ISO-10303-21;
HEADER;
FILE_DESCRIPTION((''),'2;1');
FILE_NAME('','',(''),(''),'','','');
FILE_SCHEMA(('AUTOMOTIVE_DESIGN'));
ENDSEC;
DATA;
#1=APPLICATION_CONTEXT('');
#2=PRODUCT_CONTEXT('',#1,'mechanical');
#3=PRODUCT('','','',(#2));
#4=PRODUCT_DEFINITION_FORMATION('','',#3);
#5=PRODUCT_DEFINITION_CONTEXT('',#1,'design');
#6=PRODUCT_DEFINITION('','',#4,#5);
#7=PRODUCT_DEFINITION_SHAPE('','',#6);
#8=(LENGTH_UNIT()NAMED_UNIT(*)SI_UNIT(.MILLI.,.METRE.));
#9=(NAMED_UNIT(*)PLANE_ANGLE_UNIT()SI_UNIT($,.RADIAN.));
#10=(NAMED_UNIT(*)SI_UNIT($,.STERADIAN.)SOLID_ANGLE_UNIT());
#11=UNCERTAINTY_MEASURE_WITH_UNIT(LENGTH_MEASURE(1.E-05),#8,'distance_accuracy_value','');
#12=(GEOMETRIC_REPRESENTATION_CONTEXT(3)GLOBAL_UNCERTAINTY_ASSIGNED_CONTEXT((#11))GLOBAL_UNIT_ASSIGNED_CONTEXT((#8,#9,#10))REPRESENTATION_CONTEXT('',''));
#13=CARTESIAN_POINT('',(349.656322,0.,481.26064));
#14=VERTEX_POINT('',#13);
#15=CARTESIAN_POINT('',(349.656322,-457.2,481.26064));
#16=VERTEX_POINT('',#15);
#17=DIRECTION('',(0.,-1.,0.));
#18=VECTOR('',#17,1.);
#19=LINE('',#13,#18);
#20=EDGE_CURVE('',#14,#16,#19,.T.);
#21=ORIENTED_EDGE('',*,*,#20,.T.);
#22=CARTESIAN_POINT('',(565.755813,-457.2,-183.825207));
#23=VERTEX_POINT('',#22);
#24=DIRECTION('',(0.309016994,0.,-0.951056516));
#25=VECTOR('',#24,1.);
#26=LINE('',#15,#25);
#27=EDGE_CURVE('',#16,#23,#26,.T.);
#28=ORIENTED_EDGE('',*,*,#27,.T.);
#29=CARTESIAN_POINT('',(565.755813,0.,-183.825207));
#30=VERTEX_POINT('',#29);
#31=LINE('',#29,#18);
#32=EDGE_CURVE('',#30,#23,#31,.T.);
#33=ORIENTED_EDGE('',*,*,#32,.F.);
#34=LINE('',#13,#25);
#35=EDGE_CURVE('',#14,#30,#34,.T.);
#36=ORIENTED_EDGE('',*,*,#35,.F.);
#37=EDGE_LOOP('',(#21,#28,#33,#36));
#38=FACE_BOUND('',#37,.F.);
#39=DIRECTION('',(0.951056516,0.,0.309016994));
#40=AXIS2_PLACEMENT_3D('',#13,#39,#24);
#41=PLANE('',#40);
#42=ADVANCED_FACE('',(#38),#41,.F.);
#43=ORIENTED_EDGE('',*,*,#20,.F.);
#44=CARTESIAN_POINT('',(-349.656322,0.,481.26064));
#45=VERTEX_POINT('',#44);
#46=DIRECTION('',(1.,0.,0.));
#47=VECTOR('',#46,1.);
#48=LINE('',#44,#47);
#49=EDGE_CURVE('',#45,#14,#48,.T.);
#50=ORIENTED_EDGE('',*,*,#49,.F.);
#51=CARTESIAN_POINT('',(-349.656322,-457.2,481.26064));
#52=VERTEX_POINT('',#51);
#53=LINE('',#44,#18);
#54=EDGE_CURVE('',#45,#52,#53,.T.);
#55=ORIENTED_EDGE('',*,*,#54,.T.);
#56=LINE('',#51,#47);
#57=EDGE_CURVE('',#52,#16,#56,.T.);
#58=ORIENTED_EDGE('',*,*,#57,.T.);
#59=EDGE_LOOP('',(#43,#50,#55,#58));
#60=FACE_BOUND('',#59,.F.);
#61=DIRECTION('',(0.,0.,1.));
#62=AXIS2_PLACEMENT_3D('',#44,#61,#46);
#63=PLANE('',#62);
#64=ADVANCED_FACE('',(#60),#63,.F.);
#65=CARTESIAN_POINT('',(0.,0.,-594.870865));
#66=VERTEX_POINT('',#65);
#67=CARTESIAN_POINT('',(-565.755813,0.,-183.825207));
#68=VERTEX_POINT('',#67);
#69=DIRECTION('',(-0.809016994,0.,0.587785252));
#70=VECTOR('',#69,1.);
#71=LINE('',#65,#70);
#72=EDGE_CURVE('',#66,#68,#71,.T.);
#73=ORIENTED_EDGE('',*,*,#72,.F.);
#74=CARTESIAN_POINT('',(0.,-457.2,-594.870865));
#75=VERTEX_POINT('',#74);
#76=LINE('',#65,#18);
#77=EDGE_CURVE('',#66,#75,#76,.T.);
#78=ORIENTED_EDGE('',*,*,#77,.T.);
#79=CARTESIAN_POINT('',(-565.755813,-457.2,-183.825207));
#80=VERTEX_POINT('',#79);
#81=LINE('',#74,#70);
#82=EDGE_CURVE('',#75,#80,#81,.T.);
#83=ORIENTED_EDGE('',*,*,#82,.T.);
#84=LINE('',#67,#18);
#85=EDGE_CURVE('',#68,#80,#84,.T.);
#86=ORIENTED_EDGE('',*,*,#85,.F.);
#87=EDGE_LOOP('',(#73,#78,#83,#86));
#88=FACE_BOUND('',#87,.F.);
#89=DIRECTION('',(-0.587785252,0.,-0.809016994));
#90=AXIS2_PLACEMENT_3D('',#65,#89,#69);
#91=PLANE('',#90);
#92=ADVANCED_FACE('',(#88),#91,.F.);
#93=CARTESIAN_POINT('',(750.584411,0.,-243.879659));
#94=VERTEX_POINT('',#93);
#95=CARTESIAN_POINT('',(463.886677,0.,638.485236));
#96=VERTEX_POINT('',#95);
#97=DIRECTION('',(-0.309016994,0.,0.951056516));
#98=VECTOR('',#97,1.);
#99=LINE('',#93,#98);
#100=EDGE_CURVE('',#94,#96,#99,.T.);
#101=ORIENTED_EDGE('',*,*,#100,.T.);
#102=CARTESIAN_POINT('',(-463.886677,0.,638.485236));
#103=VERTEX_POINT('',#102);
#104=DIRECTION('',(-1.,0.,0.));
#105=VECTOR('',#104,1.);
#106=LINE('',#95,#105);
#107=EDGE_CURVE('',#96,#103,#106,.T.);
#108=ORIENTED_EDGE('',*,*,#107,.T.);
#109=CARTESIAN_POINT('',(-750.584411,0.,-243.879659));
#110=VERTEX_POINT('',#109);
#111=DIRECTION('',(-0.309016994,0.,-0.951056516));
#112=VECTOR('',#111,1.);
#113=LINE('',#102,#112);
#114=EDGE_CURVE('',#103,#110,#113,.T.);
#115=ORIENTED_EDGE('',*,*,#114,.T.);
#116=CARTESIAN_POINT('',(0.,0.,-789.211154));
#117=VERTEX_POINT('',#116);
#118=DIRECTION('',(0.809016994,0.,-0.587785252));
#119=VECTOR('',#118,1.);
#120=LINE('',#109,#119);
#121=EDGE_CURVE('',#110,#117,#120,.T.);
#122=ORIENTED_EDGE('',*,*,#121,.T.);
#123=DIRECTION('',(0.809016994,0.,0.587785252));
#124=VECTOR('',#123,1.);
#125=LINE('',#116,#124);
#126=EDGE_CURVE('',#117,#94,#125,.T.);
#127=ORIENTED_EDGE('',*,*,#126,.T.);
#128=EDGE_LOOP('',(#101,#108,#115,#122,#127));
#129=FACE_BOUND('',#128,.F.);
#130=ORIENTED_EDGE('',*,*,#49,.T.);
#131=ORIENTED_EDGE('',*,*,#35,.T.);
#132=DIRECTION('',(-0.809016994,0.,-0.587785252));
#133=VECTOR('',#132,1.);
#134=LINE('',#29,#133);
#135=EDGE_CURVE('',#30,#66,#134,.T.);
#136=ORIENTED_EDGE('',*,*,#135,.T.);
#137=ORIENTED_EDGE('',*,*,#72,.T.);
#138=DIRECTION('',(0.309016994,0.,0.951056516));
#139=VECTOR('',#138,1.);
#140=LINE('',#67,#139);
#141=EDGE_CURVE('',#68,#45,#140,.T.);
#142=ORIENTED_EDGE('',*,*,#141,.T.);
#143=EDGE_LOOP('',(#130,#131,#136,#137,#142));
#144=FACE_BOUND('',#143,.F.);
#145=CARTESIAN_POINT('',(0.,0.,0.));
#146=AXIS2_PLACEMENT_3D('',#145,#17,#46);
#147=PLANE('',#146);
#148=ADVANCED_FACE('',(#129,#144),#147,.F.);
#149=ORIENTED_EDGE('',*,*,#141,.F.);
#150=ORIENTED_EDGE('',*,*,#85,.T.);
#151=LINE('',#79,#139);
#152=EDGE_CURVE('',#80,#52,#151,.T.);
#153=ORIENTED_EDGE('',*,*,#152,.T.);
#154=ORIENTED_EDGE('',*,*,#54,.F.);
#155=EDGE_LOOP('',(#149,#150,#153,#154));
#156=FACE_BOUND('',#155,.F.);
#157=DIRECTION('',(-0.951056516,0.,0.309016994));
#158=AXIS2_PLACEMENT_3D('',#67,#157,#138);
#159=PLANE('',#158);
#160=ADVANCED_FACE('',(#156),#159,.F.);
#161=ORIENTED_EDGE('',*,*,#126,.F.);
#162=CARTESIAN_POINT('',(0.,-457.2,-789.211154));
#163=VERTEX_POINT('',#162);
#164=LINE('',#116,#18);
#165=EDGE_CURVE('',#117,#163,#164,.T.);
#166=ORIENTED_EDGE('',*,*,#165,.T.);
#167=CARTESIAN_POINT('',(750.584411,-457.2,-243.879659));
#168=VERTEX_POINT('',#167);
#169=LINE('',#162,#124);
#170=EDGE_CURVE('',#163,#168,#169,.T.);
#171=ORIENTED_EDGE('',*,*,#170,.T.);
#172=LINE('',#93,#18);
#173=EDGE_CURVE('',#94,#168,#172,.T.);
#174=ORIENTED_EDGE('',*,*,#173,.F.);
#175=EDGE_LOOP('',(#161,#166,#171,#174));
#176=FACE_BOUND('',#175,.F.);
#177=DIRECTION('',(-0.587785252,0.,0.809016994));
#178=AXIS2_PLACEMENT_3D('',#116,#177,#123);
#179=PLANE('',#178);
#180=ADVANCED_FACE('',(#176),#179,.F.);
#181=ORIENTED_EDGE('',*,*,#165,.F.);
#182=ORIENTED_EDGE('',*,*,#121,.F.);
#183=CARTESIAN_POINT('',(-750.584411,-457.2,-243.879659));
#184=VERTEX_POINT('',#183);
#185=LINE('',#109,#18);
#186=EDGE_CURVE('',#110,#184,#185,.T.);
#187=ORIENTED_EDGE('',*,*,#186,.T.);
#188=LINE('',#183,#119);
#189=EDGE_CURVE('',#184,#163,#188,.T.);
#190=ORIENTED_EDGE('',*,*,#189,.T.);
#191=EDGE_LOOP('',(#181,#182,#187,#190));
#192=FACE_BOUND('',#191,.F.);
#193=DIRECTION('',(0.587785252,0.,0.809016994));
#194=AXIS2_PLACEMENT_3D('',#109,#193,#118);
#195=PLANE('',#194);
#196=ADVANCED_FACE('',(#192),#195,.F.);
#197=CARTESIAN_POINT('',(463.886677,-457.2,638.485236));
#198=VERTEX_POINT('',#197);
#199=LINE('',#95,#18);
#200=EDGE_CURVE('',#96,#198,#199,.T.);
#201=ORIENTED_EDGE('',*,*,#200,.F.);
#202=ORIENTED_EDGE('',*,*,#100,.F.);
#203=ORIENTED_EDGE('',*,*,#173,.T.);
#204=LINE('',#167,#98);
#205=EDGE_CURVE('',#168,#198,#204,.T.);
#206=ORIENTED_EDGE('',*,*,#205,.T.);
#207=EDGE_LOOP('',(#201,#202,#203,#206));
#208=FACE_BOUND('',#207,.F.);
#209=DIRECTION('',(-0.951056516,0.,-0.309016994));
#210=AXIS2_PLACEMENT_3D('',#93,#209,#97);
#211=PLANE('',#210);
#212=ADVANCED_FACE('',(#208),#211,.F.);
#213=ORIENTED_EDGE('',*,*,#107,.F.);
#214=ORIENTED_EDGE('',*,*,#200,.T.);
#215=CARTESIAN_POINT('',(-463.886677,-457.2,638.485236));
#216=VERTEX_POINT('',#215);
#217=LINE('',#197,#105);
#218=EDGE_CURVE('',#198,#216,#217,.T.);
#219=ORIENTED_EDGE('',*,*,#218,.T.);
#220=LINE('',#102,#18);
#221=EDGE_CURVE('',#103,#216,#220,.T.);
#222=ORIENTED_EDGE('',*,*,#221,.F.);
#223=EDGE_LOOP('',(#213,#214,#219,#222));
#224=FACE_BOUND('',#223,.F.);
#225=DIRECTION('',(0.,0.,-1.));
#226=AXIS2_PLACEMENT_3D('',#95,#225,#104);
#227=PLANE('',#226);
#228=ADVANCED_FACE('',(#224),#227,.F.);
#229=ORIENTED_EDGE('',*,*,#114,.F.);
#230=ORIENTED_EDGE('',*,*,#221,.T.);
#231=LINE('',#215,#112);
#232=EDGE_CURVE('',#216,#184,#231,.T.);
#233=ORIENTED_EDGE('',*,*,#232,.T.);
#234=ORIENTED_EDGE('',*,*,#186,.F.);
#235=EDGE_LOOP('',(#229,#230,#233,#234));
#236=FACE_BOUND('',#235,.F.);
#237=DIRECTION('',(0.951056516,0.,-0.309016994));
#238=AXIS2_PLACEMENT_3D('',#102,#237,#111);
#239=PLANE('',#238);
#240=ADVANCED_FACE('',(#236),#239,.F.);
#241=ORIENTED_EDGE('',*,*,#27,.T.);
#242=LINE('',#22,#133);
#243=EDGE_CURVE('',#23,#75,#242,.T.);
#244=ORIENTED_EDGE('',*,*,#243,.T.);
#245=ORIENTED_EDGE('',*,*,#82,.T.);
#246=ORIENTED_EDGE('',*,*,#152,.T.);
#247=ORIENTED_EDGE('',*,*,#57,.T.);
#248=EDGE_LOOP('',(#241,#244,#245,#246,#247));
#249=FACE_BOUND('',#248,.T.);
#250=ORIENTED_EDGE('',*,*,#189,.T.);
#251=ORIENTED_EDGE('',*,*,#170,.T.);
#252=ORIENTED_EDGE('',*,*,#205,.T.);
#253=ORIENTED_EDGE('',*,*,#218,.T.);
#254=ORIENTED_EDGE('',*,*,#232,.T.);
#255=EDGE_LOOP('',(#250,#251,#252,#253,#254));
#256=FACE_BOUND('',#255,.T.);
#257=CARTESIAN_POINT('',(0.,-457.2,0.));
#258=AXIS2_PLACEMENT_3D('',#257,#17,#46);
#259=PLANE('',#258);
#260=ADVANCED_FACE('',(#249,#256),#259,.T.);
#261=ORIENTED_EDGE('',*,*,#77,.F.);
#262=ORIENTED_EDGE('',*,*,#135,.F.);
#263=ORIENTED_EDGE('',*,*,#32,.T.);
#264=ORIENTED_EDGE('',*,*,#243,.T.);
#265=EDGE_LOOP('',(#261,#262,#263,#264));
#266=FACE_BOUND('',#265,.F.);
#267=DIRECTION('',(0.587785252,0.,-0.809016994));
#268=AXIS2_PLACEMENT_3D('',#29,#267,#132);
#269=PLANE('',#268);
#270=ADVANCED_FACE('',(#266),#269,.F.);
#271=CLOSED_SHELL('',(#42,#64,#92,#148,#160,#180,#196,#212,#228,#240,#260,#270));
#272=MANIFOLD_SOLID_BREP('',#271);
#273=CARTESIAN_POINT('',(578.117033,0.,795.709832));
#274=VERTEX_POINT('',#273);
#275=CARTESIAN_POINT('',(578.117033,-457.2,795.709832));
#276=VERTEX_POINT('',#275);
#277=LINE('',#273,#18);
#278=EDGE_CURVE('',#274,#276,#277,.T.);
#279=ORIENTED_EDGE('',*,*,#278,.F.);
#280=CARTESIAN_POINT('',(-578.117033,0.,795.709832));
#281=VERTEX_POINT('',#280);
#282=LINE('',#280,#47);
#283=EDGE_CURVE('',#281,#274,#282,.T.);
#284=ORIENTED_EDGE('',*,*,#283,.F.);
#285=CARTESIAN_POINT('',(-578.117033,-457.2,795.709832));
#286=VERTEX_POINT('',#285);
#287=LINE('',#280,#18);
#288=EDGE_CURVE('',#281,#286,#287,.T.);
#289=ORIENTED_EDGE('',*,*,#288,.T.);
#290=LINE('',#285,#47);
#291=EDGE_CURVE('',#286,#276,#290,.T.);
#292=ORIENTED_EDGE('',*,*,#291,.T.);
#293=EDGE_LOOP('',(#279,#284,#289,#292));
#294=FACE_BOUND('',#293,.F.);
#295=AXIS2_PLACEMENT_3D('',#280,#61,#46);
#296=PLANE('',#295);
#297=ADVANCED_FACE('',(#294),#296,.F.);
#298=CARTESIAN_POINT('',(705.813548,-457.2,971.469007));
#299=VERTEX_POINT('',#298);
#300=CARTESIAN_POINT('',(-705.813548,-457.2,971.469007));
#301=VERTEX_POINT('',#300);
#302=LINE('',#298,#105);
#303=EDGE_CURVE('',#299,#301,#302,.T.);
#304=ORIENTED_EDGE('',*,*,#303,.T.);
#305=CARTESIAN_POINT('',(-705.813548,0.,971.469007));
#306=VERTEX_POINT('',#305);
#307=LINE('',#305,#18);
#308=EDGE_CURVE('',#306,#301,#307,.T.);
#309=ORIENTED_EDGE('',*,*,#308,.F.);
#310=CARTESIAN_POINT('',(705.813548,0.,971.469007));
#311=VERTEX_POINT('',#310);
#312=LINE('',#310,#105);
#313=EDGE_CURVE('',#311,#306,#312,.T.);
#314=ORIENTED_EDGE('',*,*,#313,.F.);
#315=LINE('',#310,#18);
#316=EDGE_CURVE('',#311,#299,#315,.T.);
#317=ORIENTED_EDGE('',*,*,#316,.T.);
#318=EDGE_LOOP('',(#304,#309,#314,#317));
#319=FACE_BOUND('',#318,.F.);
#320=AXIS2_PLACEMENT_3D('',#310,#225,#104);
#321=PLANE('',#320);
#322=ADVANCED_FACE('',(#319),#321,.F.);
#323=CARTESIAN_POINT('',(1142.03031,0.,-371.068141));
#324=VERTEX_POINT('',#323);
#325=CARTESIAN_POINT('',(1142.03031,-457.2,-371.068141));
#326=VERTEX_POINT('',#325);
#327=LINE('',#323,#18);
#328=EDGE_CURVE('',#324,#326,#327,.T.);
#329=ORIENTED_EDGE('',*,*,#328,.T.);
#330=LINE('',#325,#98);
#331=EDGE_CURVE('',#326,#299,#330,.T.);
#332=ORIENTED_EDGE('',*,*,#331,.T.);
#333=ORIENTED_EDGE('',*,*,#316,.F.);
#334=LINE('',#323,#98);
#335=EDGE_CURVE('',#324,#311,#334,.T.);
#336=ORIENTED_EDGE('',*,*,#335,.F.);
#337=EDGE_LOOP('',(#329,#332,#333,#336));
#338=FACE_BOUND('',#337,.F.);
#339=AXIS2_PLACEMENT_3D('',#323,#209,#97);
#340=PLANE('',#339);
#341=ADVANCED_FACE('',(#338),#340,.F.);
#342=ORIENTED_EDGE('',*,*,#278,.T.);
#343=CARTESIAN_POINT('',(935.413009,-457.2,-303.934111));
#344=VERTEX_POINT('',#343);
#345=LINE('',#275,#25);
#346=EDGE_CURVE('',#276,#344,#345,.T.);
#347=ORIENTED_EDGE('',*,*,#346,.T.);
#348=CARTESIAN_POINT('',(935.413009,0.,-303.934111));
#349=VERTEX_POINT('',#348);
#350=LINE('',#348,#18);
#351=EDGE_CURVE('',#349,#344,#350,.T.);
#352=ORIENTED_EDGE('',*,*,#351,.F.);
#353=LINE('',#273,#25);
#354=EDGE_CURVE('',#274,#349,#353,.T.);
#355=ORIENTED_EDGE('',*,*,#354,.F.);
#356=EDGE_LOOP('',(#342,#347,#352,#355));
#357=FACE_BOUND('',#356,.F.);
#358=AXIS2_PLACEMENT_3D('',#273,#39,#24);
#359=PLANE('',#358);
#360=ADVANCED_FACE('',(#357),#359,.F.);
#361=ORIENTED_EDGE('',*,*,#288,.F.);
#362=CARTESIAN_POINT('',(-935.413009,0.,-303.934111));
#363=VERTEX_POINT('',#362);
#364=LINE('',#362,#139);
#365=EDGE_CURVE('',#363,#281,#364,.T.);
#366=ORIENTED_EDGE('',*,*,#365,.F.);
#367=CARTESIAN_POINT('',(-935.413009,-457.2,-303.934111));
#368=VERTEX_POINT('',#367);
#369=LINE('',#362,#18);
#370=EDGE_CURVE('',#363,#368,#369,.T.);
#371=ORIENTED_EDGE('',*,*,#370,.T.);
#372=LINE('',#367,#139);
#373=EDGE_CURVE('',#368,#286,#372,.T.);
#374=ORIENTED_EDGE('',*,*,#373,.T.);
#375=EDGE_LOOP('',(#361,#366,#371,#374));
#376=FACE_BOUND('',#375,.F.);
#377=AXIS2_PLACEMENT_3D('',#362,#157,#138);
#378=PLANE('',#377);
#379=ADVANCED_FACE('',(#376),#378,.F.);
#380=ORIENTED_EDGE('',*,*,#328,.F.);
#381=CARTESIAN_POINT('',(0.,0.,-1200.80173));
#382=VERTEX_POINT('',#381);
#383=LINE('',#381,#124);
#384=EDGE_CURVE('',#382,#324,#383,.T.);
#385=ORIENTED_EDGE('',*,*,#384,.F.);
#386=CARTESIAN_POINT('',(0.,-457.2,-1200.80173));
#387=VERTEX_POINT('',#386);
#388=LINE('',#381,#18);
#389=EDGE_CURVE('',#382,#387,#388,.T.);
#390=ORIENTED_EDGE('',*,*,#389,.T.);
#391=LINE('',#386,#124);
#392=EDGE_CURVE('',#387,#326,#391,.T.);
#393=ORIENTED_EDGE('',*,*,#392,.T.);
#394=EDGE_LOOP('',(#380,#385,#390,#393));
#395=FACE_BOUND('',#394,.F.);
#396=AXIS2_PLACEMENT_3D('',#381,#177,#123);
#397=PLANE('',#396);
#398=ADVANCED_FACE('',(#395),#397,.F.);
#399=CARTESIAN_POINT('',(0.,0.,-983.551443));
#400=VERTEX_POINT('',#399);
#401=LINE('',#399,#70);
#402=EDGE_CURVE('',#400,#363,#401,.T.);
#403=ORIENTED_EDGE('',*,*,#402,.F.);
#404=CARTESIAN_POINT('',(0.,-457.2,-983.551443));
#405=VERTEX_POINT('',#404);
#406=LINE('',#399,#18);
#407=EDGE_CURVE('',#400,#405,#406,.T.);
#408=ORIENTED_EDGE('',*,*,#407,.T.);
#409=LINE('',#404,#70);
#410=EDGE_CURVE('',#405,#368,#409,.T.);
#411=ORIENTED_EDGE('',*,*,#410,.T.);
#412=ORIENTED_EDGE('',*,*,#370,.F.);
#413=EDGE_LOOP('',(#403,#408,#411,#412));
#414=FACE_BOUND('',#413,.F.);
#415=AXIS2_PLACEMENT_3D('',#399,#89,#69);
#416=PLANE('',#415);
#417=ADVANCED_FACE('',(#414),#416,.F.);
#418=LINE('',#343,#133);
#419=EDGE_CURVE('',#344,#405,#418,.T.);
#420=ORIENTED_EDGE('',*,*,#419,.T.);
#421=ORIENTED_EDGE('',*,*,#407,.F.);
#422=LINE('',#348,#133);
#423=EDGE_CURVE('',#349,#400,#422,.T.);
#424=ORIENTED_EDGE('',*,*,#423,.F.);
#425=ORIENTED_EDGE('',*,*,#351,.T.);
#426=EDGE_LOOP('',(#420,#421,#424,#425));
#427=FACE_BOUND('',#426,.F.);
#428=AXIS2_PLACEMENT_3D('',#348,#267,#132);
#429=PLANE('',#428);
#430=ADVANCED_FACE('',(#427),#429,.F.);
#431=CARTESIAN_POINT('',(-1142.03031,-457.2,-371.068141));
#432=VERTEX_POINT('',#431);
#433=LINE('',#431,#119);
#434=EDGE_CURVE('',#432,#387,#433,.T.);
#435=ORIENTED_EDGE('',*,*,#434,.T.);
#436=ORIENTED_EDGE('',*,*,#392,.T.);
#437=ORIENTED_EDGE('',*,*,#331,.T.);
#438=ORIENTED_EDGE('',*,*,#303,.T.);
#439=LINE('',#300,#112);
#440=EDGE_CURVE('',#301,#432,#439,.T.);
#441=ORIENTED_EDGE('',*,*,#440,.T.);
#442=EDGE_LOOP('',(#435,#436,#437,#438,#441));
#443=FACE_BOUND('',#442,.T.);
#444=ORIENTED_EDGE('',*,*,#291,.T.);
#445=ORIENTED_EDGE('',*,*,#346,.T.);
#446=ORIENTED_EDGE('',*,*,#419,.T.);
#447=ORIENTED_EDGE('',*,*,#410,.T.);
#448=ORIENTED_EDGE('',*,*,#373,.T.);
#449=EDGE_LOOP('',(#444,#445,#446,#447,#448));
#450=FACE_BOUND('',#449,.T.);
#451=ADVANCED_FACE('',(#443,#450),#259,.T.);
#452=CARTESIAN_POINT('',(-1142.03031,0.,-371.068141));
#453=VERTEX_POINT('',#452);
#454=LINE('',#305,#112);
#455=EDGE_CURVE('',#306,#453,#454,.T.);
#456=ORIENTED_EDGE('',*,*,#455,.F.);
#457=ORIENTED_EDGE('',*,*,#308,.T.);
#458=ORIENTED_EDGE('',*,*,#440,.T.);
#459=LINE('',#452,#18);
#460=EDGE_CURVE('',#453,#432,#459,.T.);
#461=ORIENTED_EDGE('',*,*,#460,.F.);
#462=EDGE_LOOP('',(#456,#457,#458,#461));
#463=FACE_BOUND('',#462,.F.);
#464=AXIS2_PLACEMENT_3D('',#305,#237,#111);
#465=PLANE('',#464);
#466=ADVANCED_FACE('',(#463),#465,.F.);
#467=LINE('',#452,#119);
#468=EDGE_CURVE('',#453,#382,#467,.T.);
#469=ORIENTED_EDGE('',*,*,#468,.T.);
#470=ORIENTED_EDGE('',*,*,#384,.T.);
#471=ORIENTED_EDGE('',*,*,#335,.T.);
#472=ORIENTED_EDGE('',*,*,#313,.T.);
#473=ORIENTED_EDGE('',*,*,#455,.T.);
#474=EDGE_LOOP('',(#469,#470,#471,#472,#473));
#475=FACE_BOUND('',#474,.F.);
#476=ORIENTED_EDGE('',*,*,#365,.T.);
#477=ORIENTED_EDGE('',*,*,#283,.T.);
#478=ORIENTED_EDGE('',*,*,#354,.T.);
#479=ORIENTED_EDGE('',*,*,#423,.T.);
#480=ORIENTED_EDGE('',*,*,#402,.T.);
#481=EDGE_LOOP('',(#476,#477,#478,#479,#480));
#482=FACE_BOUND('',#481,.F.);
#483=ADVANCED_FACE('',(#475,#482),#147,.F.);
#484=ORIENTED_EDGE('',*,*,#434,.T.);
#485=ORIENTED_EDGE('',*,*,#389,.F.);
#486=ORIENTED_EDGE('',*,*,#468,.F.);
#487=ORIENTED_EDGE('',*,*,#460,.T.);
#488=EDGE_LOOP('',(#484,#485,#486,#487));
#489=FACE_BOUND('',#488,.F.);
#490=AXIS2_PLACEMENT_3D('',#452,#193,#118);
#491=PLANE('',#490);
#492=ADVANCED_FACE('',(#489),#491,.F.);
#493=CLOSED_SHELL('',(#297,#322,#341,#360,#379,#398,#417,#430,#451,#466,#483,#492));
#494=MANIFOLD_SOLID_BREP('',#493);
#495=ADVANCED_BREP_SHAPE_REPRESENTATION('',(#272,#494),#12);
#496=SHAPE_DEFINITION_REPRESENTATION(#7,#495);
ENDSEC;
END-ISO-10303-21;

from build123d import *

# Parameters (mm, degrees)
F1_DEPTH = 457.2
F2_DEPTH = 457.2
F3_DEPTH = 457.2


with BuildPart() as f1:
    # F0 (on Front) → F1 (new body)
    with BuildSketch(Plane.XZ):
        Polygon((-1142.0303102433, -371.068141493), (0, -1200.8017301559), (1142.0303102433, -371.068141493), (705.813547913, 971.469006571), (-705.813547913, 971.469006571), align=None)
        Polygon((935.4130086182, -303.9341106125), (0, -983.5514426231), (-935.4130086182, -303.9341106125), (-578.1170328449, 795.7098319241), (578.1170328449, 795.7098319241), align=None, mode=Mode.SUBTRACT)
    extrude(amount=F1_DEPTH)

    # F0 (on Front) → F3 (cut)
    with BuildSketch(Plane.XZ):
        Polygon((-407.9753176564, -132.5592162834), (0, -428.9706349373), (407.9753176564, -132.5592162834), (252.1426128827, 347.0445337521), (-252.1426128827, 347.0445337521), align=None)
        Polygon((281.7509045029, -91.5464183044), (0, -296.2504327297), (-281.7509045029, -91.5464183044), (-174.1316353438, 239.6716346693), (174.1316353438, 239.6716346693), align=None, mode=Mode.SUBTRACT)
    extrude(amount=F3_DEPTH, mode=Mode.SUBTRACT)


with BuildPart() as f2:
    # F0 (on Front) → F2 (new body)
    with BuildSketch(Plane.XZ):
        Polygon((-750.5844107294, -243.8796587313), (0, -789.2111539841), (750.5844107294, -243.8796587313), (463.8866772566, 638.4852357234), (-463.8866772566, 638.4852357234), align=None)
        Polygon((565.7558128405, -183.8252068501), (0, -594.870865345), (-565.7558128405, -183.8252068501), (-349.6563216683, 481.2606395226), (349.6563216683, 481.2606395226), align=None, mode=Mode.SUBTRACT)
    extrude(amount=F2_DEPTH)


solid = Compound([f1.part, f2.part])
